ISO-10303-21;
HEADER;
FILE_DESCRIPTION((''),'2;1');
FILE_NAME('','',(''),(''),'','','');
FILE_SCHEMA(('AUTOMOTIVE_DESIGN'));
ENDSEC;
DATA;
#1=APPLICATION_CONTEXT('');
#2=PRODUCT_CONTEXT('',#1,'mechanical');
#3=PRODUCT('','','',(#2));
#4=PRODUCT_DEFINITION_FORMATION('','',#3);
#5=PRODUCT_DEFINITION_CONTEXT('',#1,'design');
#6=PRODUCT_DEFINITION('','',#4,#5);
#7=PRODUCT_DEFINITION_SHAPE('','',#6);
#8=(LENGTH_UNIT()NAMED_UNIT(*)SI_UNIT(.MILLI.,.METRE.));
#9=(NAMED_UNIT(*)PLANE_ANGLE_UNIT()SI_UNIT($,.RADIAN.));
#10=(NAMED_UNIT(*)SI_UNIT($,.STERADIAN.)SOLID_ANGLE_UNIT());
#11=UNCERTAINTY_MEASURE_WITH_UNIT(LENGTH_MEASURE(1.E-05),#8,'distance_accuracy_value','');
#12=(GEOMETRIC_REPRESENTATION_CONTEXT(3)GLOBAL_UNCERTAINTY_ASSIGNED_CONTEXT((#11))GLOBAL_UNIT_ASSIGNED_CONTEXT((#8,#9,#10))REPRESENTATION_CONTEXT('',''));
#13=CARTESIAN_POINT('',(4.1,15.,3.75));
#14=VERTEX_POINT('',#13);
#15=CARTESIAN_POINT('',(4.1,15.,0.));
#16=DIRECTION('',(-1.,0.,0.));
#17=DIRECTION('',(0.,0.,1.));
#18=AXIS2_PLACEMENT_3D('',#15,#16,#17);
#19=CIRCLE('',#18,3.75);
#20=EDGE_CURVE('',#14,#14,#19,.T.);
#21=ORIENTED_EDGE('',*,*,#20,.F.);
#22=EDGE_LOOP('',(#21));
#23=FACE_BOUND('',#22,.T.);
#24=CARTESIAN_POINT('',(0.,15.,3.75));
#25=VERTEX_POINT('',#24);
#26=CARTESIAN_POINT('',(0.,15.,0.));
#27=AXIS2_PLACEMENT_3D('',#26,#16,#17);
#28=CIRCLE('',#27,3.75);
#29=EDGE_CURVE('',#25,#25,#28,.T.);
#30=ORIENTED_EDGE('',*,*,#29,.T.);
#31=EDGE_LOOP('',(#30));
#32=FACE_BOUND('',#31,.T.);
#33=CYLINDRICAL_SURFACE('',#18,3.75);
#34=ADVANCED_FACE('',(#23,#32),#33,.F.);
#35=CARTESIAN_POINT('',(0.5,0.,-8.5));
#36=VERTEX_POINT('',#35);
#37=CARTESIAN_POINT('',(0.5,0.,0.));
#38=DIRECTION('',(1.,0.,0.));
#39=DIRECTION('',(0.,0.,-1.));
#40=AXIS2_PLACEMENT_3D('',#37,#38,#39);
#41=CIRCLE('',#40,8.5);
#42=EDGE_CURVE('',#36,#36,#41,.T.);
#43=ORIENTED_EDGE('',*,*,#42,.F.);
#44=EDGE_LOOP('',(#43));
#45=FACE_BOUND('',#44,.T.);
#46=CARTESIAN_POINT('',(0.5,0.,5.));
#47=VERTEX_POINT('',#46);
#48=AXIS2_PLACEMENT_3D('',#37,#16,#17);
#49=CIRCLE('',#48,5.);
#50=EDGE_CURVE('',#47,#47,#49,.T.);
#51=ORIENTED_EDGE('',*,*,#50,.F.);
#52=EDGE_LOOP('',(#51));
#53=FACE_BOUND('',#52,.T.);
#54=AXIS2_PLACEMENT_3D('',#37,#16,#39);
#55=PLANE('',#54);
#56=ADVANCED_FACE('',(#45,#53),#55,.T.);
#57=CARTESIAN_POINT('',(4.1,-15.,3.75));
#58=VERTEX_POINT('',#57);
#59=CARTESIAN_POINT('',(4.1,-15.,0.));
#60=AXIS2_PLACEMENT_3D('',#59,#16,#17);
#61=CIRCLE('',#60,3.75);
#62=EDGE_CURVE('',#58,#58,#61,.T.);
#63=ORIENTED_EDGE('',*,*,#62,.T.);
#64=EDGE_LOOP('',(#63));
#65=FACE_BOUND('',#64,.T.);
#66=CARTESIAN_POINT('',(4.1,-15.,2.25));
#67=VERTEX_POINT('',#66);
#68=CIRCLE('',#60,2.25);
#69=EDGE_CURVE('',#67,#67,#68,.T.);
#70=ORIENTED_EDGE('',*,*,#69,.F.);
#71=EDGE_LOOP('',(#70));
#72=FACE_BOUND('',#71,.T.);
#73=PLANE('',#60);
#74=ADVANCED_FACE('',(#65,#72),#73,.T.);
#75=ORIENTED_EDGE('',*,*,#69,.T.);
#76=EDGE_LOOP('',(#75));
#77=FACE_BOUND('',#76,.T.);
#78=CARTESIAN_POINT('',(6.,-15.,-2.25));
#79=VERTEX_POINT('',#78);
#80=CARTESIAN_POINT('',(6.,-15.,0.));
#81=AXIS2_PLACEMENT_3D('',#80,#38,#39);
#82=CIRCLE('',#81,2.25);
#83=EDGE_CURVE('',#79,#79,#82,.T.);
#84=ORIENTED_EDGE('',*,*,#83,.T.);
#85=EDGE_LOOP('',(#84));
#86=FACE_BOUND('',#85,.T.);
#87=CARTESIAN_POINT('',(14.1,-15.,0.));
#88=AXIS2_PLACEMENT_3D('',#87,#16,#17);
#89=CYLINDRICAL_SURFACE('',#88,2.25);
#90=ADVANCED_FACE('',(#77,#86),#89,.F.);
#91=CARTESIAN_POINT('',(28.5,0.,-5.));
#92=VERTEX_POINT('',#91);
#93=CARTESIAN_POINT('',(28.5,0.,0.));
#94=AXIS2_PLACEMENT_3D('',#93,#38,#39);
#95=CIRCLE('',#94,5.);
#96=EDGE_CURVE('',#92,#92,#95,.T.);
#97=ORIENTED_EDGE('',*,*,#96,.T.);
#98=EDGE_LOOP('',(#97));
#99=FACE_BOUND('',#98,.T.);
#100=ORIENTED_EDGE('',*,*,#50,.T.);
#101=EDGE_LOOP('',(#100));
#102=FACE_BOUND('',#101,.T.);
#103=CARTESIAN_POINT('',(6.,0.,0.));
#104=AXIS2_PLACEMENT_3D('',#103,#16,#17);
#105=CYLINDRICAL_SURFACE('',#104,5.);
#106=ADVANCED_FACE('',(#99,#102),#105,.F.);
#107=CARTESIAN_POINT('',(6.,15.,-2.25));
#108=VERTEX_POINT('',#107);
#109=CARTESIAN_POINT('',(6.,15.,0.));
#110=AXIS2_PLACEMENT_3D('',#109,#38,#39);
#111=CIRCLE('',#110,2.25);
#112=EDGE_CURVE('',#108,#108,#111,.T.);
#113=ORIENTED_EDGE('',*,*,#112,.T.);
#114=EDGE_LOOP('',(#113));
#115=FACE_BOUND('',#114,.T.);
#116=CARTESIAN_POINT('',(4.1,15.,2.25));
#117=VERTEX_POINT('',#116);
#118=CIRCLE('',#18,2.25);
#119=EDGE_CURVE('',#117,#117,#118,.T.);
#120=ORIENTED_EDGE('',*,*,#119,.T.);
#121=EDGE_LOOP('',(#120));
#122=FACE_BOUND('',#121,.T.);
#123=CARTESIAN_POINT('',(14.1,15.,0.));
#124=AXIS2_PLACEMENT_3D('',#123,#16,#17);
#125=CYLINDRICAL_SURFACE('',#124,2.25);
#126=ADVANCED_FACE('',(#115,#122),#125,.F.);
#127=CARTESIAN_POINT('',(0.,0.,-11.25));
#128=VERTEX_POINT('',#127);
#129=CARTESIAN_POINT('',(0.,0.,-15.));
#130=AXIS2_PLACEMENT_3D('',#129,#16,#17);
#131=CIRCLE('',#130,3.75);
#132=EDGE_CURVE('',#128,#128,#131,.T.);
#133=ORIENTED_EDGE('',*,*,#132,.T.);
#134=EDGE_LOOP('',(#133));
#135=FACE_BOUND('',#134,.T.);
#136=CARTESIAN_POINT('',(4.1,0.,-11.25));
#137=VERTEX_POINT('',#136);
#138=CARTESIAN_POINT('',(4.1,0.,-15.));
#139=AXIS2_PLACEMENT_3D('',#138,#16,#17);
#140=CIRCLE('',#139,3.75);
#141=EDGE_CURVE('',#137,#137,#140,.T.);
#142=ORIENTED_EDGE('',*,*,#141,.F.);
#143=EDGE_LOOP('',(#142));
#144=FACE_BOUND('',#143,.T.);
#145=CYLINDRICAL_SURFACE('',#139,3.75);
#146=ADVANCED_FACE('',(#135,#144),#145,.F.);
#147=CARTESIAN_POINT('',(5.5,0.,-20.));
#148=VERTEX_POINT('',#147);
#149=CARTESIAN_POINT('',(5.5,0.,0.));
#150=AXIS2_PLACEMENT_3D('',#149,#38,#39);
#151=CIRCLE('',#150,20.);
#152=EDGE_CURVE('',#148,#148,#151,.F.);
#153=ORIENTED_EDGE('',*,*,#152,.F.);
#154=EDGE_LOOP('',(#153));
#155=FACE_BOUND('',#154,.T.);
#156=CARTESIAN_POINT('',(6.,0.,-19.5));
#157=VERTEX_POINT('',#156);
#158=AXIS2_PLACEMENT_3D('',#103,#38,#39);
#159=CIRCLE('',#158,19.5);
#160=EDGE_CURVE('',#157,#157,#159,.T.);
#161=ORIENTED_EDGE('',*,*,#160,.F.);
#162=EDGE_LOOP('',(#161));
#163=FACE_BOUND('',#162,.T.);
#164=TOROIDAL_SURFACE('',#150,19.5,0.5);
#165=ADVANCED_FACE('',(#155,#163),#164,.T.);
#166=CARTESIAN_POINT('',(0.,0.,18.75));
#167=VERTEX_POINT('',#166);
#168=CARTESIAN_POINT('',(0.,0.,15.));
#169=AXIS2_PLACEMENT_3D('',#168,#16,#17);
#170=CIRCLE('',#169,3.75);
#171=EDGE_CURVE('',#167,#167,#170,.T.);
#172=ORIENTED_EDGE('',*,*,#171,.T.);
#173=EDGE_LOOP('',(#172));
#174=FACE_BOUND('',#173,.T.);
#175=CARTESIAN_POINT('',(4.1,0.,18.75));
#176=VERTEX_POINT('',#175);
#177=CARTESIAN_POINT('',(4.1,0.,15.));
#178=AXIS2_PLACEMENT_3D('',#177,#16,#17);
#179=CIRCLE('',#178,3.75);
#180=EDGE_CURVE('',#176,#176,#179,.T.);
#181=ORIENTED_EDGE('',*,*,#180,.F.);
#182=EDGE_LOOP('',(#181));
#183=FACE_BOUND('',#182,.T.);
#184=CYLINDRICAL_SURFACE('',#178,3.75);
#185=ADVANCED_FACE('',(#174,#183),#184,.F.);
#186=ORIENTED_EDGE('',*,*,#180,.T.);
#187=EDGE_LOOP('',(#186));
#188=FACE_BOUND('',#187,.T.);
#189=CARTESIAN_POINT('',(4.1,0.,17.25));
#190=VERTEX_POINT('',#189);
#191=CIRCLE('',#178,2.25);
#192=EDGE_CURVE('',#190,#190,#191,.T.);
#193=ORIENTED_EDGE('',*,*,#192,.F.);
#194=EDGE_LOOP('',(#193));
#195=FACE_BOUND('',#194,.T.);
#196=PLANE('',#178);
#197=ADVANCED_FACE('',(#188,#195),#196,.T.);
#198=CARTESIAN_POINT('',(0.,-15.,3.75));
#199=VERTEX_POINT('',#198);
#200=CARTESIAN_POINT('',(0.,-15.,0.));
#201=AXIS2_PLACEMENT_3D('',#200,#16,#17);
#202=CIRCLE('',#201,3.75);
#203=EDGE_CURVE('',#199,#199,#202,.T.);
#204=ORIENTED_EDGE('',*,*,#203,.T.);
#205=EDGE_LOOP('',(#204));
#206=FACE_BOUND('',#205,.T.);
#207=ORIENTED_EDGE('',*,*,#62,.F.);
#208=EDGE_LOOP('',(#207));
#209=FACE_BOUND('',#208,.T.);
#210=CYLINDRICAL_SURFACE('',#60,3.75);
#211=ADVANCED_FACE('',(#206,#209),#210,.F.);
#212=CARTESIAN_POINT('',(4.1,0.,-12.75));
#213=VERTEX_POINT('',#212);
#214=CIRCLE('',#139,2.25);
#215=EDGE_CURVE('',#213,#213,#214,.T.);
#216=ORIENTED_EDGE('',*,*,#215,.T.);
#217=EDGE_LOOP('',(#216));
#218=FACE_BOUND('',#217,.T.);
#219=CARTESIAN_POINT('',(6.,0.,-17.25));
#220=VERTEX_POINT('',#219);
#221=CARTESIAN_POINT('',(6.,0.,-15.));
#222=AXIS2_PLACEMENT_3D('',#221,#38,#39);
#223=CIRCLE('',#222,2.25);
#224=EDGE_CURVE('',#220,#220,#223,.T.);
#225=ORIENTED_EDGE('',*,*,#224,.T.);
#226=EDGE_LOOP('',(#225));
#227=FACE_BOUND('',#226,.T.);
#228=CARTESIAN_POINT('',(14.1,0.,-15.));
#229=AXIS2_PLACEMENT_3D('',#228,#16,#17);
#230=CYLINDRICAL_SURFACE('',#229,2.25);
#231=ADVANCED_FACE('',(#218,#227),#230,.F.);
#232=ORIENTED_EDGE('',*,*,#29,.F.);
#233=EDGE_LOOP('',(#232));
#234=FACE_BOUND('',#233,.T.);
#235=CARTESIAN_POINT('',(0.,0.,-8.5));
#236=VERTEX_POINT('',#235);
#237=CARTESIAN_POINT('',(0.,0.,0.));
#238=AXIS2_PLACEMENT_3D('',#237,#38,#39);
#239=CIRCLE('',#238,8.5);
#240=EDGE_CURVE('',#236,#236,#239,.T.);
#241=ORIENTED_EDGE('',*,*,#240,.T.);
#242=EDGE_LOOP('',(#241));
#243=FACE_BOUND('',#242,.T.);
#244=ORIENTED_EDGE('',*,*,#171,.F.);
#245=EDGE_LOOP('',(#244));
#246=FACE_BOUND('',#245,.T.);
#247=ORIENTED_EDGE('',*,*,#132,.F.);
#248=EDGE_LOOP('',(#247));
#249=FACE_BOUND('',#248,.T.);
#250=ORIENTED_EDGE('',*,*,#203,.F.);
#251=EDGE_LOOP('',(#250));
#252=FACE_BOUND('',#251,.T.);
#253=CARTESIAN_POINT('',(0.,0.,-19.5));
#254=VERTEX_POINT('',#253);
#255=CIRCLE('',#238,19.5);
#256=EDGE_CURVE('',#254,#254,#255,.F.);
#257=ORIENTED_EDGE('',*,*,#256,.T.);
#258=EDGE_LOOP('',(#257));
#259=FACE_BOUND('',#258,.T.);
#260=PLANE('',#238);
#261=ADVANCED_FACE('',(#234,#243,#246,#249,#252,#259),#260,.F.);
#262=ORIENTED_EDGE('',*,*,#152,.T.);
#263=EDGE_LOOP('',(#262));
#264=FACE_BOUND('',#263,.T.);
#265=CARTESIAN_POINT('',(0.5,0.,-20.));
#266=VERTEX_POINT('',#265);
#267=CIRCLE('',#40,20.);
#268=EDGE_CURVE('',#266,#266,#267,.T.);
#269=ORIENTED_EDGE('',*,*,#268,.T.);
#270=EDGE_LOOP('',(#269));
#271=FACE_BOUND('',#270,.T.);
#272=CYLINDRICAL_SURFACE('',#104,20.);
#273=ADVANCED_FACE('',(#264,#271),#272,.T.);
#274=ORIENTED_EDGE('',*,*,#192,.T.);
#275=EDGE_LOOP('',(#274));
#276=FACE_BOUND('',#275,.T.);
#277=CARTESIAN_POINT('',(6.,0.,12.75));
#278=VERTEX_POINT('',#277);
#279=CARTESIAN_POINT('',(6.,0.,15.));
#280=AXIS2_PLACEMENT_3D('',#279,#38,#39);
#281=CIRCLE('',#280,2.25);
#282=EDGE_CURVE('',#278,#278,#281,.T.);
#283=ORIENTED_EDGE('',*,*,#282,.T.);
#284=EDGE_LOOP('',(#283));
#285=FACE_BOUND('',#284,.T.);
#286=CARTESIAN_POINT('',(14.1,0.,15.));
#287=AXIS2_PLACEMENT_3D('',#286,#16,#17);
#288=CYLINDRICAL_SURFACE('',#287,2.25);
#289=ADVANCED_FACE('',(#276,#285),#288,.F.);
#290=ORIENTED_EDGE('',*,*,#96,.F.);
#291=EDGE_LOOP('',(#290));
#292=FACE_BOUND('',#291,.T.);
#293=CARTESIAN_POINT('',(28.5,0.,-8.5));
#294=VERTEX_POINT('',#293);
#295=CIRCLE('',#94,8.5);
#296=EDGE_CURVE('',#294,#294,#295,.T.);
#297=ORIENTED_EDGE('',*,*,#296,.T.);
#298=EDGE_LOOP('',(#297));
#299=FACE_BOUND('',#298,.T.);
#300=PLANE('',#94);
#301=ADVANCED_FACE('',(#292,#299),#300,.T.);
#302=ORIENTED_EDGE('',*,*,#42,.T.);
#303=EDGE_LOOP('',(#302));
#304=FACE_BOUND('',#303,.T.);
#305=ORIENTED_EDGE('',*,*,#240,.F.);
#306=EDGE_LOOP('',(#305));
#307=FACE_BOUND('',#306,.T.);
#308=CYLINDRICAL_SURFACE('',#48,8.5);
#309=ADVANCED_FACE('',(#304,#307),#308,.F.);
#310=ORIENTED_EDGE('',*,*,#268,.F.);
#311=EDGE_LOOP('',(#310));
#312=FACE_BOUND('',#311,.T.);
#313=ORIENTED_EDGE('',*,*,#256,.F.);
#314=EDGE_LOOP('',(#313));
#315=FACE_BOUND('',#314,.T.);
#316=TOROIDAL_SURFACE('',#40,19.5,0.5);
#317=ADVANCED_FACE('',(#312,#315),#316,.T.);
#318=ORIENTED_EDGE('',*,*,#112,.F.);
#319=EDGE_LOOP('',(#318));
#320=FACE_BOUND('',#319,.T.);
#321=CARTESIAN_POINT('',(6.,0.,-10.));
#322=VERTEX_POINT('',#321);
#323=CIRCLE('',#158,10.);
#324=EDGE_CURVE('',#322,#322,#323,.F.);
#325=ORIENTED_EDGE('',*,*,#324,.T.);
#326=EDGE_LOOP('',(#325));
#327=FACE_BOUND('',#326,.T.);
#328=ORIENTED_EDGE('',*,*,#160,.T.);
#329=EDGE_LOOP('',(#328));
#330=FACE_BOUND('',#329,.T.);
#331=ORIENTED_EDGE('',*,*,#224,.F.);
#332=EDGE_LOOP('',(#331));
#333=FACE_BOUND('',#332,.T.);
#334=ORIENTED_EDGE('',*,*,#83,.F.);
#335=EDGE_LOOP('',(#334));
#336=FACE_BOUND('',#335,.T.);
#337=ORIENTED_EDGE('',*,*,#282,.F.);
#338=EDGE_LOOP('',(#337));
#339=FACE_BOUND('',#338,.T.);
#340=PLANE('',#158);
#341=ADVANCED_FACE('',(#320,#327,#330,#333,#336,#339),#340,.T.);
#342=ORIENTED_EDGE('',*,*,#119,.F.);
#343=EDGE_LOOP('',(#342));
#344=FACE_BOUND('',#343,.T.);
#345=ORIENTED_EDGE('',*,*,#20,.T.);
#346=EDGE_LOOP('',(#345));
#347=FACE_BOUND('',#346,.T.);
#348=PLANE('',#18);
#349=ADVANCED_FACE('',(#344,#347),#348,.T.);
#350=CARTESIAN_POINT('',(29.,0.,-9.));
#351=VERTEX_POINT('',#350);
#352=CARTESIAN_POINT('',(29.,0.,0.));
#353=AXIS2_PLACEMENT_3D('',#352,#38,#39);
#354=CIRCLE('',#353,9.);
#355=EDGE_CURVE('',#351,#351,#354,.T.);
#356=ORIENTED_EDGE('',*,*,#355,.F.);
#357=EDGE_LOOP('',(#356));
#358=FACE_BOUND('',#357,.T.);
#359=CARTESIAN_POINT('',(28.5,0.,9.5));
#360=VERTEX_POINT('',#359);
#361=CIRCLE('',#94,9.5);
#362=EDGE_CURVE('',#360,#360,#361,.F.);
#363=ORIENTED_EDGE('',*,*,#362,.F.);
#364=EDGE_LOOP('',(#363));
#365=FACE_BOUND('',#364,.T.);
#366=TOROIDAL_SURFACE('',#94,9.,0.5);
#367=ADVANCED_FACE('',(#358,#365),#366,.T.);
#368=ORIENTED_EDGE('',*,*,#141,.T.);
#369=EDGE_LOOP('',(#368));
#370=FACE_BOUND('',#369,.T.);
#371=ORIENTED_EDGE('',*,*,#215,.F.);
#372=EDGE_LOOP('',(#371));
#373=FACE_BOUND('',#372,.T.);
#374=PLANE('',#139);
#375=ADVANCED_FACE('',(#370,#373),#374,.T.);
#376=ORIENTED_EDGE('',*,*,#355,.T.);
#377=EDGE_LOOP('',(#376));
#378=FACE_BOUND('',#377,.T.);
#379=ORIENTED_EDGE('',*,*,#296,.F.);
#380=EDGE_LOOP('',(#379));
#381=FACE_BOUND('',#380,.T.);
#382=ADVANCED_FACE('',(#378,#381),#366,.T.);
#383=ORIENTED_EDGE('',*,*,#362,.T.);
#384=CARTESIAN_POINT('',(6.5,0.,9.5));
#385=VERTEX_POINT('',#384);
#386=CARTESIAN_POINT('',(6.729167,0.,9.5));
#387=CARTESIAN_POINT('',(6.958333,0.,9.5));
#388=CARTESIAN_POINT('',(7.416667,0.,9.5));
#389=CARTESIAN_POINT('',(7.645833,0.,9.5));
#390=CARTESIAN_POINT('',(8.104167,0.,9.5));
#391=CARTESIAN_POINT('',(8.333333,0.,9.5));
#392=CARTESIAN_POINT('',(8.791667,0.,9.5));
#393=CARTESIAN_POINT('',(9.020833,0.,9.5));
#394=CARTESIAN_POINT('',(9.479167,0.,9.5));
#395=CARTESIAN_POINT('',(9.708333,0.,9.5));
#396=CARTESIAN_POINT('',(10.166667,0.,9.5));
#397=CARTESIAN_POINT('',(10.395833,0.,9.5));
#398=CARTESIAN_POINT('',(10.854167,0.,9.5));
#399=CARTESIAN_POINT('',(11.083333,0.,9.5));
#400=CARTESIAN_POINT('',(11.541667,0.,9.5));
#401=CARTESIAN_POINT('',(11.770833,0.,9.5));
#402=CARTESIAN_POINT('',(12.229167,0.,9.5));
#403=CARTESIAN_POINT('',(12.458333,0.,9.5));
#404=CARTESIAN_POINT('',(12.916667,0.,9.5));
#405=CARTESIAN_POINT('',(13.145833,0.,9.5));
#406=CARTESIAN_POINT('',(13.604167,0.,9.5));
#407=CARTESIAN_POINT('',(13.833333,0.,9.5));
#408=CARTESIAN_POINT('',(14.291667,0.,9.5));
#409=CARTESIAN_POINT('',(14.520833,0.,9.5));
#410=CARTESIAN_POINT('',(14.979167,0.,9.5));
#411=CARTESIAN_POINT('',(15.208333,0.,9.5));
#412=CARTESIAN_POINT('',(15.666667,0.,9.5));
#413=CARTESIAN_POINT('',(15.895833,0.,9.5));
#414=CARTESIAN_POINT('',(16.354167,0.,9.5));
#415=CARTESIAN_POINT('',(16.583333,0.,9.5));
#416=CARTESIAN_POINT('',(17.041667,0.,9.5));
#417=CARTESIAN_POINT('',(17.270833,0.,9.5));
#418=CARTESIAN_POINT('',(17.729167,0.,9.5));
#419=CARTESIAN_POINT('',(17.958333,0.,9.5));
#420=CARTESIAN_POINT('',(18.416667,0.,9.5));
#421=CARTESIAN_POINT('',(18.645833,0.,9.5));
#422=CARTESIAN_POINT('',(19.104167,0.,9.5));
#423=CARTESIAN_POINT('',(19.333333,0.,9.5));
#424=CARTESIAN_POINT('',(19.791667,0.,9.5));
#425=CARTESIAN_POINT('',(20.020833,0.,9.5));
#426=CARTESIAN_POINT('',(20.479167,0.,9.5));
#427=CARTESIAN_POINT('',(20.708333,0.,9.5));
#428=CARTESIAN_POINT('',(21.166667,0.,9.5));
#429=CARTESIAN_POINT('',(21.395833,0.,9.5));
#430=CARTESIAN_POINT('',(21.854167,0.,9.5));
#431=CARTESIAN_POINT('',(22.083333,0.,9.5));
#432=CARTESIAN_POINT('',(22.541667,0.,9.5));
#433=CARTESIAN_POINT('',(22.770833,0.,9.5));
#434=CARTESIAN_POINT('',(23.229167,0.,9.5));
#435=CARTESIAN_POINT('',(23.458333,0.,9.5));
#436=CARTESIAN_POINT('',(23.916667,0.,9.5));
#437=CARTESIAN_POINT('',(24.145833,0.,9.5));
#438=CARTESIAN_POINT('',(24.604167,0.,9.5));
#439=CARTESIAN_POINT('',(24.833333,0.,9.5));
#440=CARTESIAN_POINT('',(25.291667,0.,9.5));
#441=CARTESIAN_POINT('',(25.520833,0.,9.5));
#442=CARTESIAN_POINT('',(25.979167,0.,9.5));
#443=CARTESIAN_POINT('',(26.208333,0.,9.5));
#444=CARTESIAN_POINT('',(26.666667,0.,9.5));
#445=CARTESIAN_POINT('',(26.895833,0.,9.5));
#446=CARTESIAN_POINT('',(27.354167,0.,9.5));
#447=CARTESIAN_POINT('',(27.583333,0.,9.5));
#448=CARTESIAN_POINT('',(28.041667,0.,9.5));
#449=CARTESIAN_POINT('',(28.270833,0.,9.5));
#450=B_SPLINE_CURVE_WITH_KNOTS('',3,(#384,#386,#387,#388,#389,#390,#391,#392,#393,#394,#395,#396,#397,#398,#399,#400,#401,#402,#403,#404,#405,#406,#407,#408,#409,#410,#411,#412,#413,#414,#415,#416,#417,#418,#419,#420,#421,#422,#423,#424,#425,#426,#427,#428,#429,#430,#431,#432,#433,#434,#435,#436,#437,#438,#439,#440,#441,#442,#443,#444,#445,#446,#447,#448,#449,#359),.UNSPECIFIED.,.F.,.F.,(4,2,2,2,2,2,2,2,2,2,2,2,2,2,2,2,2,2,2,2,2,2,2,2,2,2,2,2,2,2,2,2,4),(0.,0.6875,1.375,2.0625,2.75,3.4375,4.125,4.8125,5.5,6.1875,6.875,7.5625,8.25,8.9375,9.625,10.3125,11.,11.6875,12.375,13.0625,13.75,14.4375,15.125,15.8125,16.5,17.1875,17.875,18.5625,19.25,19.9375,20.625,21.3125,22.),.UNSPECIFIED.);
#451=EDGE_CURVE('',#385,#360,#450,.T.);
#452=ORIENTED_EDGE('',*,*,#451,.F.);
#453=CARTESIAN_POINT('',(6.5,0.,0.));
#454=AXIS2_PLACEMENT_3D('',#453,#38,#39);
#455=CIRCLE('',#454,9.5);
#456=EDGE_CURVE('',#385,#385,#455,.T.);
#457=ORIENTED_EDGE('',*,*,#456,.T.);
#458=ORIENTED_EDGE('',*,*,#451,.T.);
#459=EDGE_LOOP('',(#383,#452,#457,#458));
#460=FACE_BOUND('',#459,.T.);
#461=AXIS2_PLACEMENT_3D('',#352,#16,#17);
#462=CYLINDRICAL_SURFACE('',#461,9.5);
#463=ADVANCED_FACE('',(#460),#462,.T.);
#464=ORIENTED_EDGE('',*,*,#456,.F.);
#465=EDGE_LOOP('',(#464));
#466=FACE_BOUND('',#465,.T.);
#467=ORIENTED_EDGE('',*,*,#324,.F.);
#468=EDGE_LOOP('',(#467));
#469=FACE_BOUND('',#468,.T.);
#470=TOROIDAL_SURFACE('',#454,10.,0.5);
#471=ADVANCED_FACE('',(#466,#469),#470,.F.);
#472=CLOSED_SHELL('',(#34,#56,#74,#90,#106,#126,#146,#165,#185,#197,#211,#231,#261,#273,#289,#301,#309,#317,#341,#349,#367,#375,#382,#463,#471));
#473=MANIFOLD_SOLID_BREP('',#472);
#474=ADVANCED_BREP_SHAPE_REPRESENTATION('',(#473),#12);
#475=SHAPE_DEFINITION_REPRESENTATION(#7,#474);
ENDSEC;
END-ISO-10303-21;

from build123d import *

# Parameters (mm, degrees)
IZIM1_R                     = 20
IZIM1_R_2                   = 9.5
IZIM1_R_3                   = 5
Y_KSEKLIK_EKSTR_ZYON1_DEPTH = 6
IZIM1_4_R                   = 9.5
IZIM1_4_R_2                 = 5
Y_KSEKLIK_EKSTR_ZYON2_DEPTH = 29
IZIM2_R                     = 2.25
KES_EKSTR_ZYON5_DEPTH       = 14.1
IZIM2_6_R                   = 3.75
IZIM2_6_R_2                 = 2.25
KES_EKSTR_ZYON6_DEPTH       = 4.1
IZIM3_R                     = 8.5
KES_EKSTR_ZYON7_DEPTH       = 0.5
RADYUS1_R                   = 0.5


with BuildPart() as part:
    # Çizim1 → Yükseklik-Ekstrüzyon1 (new body)
    # profile 1 of 2: a face of its own
    with BuildSketch(Plane(origin=(0, 0, 0), x_dir=(0, 0, -1), z_dir=(1, 0, 0))):
        Circle(IZIM1_R)
        Circle(IZIM1_R_2, mode=Mode.SUBTRACT)
    # profile 2 of 2: a face of its own
    with BuildSketch(Plane(origin=(0, 0, 0), x_dir=(0, 0, -1), z_dir=(1, 0, 0))):
        Circle(IZIM1_R_2)
        Circle(IZIM1_R_3, mode=Mode.SUBTRACT)
    extrude(amount=Y_KSEKLIK_EKSTR_ZYON1_DEPTH)

    # Çizim1<4> → Yükseklik-Ekstrüzyon2 (add)
    with BuildSketch(Plane(origin=(0, 0, 0), x_dir=(0, 0, -1), z_dir=(1, 0, 0))):
        with Locations(Location((0, 0, 0), (0, 0, 180))):
            Circle(IZIM1_4_R)
        Circle(IZIM1_4_R_2, mode=Mode.SUBTRACT)
    extrude(amount=Y_KSEKLIK_EKSTR_ZYON2_DEPTH)

    # Çizim2 → Kes-Ekstrüzyon5 (cut)
    with BuildSketch(Plane.ZY):
        with Locations((0, 15)):
            Circle(IZIM2_R)
        with Locations((15, 0)):
            Circle(IZIM2_R)
        with Locations((0, -15)):
            Circle(IZIM2_R)
        with Locations((-15, 0)):
            Circle(IZIM2_R)
    extrude(amount=-KES_EKSTR_ZYON5_DEPTH, mode=Mode.SUBTRACT)

    # Çizim2<6> → Kes-Ekstrüzyon6 (cut)
    # profile 1 of 4: a face of its own
    with BuildSketch(Plane.ZY):
        with Locations((0, 15)):
            Circle(IZIM2_6_R)
        with Locations((0, 15)):
            Circle(IZIM2_6_R_2, mode=Mode.SUBTRACT)
    # profile 2 of 4: a face of its own
    with BuildSketch(Plane.ZY):
        with Locations((15, 0)):
            Circle(IZIM2_6_R)
        with Locations((15, 0)):
            Circle(IZIM2_6_R_2, mode=Mode.SUBTRACT)
    # profile 3 of 4: a face of its own
    with BuildSketch(Plane.ZY):
        with Locations((0, -15)):
            Circle(IZIM2_6_R)
        with Locations((0, -15)):
            Circle(IZIM2_6_R_2, mode=Mode.SUBTRACT)
    # profile 4 of 4: a face of its own
    with BuildSketch(Plane.ZY):
        with Locations((-15, 0)):
            Circle(IZIM2_6_R)
        with Locations((-15, 0)):
            Circle(IZIM2_6_R_2, mode=Mode.SUBTRACT)
    extrude(amount=-KES_EKSTR_ZYON6_DEPTH, mode=Mode.SUBTRACT)

    # Çizim3 → Kes-Ekstrüzyon7 (cut)
    with BuildSketch(Plane(origin=(29, 0, 0), x_dir=(0, 0, -1), z_dir=(1, 0, 0))):
        Circle(IZIM3_R)
    kes_ekstr_zyon7 = extrude(amount=-KES_EKSTR_ZYON7_DEPTH, mode=Mode.SUBTRACT)

    # Radyus1
    radyus1_edges = [part.edges().sort_by_distance(p)[0] for p in [
        (6, 0, -9.5),
        (29, 0, -9.5),
        (0, 0, 20),
        (6, 0, 20),
        (29, 0, 8.5),
    ]]
    fillet(radyus1_edges, radius=RADYUS1_R - 0.0001)  # a hair under: the kernel refuses the full size

    # Aynalama1: Kes-Ekstrüzyon7 across plane
    add(kes_ekstr_zyon7.mirror(Plane(origin=(14.5, 0, 0), x_dir=(0, 0, 1), z_dir=(1, 0, 0))), mode=Mode.SUBTRACT)


solid = part.part
